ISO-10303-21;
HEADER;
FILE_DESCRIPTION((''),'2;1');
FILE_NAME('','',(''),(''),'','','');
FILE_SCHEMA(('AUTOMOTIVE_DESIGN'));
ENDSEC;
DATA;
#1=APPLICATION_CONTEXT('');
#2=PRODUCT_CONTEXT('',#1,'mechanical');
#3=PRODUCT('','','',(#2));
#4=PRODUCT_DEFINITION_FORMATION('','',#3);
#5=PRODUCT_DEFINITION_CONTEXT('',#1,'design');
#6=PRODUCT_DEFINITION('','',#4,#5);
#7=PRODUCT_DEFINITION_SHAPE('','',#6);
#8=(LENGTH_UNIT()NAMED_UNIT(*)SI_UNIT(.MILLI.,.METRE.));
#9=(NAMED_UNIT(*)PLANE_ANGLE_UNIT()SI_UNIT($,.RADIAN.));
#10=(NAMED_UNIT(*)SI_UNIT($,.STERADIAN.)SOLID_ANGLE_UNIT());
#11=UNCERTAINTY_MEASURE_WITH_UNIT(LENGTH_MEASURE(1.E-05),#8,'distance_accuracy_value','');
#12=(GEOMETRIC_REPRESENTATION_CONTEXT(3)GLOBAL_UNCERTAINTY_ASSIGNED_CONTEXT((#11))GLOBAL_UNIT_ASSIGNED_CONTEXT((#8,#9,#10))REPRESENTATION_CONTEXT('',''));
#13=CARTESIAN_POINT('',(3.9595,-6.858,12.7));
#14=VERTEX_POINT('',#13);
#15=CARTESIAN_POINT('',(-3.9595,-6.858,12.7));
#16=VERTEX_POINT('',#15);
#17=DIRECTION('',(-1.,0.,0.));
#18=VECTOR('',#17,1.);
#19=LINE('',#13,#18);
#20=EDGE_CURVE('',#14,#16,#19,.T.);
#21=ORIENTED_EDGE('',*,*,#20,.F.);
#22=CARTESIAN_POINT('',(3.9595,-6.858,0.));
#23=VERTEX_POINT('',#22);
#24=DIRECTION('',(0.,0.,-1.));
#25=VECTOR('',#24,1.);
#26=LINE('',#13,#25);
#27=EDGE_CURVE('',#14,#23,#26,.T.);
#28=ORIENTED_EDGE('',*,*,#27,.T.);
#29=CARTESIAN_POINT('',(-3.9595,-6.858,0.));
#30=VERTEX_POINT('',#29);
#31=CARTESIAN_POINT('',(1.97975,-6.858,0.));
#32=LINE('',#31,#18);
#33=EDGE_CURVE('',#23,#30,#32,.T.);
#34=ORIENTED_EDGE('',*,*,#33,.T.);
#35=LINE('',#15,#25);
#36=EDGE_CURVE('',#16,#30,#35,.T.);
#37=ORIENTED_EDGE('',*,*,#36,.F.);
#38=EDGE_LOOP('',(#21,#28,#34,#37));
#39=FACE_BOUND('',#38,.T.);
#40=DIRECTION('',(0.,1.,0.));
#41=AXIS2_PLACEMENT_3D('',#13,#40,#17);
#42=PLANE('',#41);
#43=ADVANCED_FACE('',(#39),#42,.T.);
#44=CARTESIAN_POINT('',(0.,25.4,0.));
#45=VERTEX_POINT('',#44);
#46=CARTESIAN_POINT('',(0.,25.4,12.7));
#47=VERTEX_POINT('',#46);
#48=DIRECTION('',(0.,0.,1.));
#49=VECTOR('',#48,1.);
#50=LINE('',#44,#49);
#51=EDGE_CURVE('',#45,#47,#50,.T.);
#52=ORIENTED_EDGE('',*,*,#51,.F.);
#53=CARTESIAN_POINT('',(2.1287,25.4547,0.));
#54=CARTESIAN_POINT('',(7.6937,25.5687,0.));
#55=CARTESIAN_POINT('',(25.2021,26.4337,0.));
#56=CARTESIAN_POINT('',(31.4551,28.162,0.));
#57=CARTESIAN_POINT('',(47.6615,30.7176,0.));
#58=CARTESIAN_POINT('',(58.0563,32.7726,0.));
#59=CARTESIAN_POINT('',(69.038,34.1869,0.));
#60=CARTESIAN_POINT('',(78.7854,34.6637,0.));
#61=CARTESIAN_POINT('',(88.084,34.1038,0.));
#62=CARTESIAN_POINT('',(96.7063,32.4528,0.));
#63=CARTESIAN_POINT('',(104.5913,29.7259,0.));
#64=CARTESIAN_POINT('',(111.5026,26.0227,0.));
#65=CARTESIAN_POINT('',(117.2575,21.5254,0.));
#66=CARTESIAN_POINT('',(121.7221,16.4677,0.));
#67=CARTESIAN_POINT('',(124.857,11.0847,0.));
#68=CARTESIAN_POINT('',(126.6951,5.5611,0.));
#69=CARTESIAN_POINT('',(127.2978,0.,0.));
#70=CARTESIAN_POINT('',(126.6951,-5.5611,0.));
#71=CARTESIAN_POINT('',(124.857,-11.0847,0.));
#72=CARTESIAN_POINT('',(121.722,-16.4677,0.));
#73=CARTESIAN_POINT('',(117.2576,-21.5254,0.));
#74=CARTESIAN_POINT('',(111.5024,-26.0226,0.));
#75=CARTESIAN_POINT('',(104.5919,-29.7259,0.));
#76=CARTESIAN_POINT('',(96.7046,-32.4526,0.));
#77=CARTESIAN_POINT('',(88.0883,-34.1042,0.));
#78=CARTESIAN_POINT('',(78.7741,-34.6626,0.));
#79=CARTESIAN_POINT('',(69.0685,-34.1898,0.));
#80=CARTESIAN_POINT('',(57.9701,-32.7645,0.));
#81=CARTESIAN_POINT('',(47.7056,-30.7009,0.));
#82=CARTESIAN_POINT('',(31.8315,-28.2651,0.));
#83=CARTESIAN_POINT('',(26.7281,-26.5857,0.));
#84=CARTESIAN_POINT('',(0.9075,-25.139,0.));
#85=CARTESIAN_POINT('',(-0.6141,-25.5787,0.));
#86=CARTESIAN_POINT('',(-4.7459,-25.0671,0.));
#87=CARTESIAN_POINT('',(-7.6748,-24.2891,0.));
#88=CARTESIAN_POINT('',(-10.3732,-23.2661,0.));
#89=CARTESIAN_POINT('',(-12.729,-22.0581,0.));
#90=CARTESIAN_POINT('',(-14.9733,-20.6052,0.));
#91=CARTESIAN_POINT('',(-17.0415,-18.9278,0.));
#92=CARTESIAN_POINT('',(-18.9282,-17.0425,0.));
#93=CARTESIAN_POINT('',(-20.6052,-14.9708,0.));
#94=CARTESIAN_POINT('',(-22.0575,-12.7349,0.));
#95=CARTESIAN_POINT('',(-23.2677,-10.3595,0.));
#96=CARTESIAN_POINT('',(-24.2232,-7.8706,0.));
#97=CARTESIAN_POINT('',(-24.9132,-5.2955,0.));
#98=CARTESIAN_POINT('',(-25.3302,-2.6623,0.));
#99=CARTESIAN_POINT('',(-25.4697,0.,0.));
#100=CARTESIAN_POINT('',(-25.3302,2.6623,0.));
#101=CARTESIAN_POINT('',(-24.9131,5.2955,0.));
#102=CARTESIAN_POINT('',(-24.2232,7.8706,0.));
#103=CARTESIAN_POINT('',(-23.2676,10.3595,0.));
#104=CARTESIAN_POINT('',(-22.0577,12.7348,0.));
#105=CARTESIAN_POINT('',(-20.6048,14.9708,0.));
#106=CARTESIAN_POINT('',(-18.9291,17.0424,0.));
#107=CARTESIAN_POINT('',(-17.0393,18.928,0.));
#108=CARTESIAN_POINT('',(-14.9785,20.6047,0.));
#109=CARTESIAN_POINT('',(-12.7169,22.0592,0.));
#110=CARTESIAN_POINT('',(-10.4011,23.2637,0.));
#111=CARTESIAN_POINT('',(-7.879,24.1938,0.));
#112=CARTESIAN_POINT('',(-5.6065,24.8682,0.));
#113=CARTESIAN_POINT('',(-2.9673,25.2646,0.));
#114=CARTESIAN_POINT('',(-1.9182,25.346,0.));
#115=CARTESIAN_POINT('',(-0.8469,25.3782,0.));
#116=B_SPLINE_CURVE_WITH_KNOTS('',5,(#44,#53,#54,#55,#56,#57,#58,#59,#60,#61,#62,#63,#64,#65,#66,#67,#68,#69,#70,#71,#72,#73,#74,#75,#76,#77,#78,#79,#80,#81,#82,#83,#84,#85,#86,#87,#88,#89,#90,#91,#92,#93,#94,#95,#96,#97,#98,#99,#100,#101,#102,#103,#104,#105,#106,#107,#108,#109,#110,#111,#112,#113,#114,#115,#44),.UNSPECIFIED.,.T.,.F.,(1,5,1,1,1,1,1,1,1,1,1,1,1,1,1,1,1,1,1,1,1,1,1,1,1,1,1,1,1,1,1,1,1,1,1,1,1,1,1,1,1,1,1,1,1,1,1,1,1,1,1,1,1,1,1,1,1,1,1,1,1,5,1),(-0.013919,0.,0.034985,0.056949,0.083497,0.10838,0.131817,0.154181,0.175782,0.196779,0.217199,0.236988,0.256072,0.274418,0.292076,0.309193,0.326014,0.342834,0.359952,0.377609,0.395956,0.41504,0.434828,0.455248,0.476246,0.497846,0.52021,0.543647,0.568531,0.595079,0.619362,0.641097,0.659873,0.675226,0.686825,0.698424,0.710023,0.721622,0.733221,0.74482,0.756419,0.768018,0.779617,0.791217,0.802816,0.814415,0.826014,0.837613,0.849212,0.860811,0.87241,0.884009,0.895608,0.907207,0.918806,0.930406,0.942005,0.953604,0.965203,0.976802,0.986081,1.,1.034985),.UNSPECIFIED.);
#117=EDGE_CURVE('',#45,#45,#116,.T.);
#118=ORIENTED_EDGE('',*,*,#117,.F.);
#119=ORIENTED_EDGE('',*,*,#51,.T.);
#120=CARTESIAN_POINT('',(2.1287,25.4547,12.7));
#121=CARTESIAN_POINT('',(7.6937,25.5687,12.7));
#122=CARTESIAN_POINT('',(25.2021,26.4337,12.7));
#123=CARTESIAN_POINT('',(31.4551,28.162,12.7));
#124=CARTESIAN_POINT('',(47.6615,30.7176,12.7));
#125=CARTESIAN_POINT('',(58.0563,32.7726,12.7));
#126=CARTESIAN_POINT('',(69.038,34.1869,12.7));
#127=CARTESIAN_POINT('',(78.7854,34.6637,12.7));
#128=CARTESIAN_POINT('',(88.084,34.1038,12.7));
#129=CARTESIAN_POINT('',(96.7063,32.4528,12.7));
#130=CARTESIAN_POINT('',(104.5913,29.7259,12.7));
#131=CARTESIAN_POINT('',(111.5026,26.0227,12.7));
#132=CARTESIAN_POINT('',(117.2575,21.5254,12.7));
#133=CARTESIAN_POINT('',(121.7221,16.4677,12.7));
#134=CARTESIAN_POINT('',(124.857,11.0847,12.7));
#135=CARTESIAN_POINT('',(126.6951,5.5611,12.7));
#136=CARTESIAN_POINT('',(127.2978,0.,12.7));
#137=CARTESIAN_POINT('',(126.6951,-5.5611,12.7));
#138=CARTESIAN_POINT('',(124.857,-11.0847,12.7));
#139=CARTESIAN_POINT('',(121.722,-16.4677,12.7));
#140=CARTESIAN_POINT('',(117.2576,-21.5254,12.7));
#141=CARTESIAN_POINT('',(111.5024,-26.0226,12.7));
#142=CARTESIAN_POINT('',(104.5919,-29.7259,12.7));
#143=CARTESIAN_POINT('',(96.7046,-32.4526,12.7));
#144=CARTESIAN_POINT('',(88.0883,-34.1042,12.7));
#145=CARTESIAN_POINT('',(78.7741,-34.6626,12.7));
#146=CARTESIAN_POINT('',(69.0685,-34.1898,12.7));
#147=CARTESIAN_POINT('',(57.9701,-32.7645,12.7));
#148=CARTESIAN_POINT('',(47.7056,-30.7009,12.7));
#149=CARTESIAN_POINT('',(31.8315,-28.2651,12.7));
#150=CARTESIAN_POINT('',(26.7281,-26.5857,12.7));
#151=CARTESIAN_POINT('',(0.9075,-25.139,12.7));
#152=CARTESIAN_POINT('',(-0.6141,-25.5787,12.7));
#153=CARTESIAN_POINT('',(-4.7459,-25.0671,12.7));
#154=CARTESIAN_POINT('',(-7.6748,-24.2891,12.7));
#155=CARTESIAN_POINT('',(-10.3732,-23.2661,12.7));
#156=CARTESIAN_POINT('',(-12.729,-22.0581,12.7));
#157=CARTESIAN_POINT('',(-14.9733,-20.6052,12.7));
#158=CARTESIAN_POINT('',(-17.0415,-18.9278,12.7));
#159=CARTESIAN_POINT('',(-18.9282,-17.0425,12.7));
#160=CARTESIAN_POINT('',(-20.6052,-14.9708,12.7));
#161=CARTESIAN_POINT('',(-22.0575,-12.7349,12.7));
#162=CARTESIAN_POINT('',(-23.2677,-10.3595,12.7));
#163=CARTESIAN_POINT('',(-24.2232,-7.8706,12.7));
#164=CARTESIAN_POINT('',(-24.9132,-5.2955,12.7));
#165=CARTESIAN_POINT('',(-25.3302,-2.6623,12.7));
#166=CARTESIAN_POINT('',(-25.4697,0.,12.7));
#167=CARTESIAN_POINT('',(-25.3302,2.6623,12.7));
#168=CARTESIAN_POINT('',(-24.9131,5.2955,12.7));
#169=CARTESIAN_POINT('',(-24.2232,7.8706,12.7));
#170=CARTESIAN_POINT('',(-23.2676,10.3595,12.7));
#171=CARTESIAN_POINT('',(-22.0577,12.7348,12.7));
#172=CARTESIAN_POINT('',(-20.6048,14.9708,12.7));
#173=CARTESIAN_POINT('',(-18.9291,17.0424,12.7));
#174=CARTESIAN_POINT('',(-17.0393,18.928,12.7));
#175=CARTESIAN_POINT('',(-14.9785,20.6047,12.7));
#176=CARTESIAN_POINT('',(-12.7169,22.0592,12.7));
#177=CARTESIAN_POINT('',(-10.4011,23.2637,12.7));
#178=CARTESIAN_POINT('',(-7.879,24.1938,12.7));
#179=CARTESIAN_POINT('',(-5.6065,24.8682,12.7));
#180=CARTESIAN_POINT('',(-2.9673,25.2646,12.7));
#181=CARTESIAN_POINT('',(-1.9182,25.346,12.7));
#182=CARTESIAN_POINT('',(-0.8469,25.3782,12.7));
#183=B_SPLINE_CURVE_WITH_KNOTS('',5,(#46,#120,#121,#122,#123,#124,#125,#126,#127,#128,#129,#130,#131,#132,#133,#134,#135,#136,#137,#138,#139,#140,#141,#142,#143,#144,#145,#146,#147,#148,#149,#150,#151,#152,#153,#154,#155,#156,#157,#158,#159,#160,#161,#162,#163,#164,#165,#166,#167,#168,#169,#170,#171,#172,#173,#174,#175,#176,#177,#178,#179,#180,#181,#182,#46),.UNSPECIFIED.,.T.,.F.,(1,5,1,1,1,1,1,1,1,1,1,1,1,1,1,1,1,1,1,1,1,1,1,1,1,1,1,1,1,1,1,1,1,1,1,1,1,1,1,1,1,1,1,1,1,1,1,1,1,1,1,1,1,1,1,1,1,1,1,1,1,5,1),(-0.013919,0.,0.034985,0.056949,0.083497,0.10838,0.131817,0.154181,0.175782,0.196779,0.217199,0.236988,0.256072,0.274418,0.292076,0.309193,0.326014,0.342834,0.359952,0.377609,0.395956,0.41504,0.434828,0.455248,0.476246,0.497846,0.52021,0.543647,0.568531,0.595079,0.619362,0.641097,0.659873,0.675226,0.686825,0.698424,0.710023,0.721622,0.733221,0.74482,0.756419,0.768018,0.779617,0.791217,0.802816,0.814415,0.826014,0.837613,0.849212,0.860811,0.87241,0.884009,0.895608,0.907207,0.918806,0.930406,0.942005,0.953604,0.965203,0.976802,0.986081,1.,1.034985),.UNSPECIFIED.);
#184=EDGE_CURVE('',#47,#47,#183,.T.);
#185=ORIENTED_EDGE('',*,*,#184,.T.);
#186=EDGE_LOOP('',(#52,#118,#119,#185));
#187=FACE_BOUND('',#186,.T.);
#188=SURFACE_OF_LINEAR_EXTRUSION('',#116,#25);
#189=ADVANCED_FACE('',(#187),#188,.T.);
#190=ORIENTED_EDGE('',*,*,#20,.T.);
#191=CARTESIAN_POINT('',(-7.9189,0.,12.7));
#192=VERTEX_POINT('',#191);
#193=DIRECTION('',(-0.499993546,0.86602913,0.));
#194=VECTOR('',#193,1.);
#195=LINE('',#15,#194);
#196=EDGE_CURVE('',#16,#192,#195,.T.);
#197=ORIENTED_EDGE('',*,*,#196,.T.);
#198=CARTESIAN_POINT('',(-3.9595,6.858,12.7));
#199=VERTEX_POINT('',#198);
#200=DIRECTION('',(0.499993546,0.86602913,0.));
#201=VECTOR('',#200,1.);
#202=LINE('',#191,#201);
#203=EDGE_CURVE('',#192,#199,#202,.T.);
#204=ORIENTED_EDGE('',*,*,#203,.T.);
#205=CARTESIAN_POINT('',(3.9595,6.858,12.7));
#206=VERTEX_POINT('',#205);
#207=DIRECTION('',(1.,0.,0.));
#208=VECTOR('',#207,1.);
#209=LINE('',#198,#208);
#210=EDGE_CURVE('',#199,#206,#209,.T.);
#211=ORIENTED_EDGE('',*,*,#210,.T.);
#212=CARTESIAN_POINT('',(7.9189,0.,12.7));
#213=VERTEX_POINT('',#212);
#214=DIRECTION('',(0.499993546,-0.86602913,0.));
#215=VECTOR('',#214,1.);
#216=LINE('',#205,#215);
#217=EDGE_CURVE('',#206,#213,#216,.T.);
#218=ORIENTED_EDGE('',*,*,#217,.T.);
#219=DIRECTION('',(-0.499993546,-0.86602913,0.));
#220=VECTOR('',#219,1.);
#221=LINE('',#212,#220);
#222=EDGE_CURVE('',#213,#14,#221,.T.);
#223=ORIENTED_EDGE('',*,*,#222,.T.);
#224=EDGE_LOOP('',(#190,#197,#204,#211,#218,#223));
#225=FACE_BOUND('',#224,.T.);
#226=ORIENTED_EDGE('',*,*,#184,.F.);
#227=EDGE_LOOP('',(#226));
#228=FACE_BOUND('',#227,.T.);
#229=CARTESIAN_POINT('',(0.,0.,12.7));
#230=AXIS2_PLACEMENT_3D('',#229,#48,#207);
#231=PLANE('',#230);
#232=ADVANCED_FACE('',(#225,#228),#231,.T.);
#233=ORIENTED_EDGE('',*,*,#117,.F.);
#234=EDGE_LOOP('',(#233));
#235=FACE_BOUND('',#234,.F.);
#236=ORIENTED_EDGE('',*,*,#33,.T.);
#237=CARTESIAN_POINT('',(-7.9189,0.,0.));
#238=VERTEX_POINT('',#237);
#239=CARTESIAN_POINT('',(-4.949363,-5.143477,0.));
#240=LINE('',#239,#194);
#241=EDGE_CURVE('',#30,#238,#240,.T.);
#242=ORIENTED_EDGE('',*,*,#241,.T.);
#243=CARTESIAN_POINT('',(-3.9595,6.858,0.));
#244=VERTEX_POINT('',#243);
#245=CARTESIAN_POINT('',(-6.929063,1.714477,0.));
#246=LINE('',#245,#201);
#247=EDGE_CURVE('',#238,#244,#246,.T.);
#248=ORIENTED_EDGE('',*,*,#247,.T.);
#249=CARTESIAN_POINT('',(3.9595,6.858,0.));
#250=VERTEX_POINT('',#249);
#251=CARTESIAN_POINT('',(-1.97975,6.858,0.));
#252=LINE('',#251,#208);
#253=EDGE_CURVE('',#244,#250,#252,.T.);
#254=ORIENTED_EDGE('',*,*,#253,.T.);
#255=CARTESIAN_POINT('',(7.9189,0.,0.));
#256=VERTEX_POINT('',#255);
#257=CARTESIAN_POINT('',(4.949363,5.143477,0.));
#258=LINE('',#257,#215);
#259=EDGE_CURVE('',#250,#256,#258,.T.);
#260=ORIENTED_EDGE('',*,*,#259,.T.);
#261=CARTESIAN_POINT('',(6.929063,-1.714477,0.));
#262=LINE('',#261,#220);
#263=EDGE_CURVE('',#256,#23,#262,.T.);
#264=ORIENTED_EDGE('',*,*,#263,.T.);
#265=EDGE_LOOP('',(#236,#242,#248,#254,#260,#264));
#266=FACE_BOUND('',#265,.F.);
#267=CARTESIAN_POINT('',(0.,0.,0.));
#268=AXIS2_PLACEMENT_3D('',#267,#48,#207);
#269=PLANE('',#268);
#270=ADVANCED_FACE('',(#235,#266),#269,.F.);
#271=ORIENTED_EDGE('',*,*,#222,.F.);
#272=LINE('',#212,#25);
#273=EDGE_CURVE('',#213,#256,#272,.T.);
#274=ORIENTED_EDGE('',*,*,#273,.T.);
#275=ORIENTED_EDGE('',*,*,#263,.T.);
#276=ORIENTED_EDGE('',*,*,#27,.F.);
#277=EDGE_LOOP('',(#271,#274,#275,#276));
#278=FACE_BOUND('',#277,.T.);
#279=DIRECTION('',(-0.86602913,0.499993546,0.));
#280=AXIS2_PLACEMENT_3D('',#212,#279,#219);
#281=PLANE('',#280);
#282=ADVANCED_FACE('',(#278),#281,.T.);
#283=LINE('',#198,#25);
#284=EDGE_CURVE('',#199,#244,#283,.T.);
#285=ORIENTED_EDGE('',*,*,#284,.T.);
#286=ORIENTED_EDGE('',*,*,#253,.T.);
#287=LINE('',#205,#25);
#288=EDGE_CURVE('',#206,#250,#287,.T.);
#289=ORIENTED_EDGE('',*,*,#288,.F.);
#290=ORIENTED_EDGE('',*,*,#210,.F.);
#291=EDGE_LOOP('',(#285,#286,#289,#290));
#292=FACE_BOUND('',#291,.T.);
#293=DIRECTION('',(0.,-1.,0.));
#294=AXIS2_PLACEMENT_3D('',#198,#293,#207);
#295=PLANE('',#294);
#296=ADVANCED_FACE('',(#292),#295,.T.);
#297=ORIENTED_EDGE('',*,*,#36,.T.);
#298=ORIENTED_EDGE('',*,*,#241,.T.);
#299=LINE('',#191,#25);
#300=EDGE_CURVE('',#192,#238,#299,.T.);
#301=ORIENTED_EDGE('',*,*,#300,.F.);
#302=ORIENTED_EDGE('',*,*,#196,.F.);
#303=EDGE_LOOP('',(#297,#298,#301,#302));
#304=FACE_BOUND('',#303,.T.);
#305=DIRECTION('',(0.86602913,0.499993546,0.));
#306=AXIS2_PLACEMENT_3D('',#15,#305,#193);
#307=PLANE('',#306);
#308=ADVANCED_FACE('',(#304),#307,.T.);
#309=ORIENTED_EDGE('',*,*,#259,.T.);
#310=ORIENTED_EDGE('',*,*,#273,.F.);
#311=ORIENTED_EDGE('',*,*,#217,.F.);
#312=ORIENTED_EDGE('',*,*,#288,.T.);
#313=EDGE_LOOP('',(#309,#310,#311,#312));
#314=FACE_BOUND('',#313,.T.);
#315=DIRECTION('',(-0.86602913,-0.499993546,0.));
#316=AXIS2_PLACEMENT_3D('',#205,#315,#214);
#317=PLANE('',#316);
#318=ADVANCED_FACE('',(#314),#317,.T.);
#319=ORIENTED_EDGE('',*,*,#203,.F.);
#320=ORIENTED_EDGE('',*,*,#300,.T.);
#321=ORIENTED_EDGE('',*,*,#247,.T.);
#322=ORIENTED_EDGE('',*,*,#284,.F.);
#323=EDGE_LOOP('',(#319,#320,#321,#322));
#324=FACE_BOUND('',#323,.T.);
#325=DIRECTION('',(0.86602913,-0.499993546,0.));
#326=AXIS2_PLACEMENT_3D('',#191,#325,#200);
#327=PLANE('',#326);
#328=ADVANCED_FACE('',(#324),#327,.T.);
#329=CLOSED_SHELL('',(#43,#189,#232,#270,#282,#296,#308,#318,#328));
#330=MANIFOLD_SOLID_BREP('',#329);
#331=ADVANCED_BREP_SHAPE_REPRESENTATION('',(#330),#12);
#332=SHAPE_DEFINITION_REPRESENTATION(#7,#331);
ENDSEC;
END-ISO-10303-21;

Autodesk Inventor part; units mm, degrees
ref_plane "YZ Plane" through (0, 0, 0) normal (1, 0, 0) x (0, 1, 0)
ref_plane "XZ Plane" through (0, 0, 0) normal (0, 1, 0) x (-1, 0, 0)
sketch "Main Sketch" plane through (0, 0, 0) normal (0, 0, 1) x (1, 0, 0)
  spline S0 degree 5 poles (0, 25.4) (2.1287, 25.4547) (7.6937, 25.5687) (25.2021, 26.4337) (31.4551, 28.162) (47.6615, 30.7176) (58.0563, 32.7726) (69.038, 34.1869) (78.7854, 34.6637) (88.084, 34.1038) (96.7063, 32.4528) (104.5913, 29.7259) (111.5026, 26.0227) (117.2575, 21.5254) (121.7221, 16.4677) (124.857, 11.0847) (126.6951, 5.5611) (127.2978, 0) (126.6951, -5.5611) (124.857, -11.0847) (121.722, -16.4677) (117.2576, -21.5254) (111.5024, -26.0226) (104.5919, -29.7259) (96.7046, -32.4526) (88.0883, -34.1042) (78.7741, -34.6626) (69.0685, -34.1898) (57.9701, -32.7645) (47.7056, -30.7009) (31.8315, -28.2651) (26.7281, -26.5857) (0.9075, -25.139) (-0.6141, -25.5787) (-4.7459, -25.0671) (-7.6748, -24.2891) (-10.3732, -23.2661) (-12.729, -22.0581) (-14.9733, -20.6052) (-17.0415, -18.9278) (-18.9282, -17.0425) (-20.6052, -14.9708) (-22.0575, -12.7349) (-23.2677, -10.3595) (-24.2232, -7.8706) (-24.9132, -5.2955) (-25.3302, -2.6623) (-25.4697, 0) (-25.3302, 2.6623) (-24.9131, 5.2955) (-24.2232, 7.8706) (-23.2676, 10.3595) (-22.0577, 12.7348) (-20.6048, 14.9708) (-18.9291, 17.0424) (-17.0393, 18.928) (-14.9785, 20.6047) (-12.7169, 22.0592) (-10.4011, 23.2637) (-7.879, 24.1938) (-5.6065, 24.8682) (-2.9673, 25.2646) (-1.9182, 25.346) (-0.8469, 25.3782) (0, 25.4) knots 0 0 0 0 0 0 0.034985 0.056949 0.083497 0.10838 0.131817 0.154181 0.175782 0.196779 0.217199 0.236988 0.256072 0.274418 0.292076 0.309193 0.326014 0.342834 0.359952 0.377609 0.395956 0.41504 0.434828 0.455248 0.476246 0.497846 0.52021 0.543647 0.568531 0.595079 0.619362 0.641097 0.659873 0.675226 0.686825 0.698424 0.710023 0.721622 0.733221 0.74482 0.756419 0.768018 0.779617 0.791217 0.802816 0.814415 0.826014 0.837613 0.849212 0.860811 0.87241 0.884009 0.895608 0.907207 0.918806 0.930406 0.942005 0.953604 0.965203 0.976802 0.986081 1 1 1 1 1 1
  point P0 (34.3511, 28.4773)
  point P1 (47.9087, 30.8624)
  point P2 (59.4553, 32.8129)
  point P3 (69.7636, 34.0431)
  point P4 (79.3599, 34.4006)
  point P5 (88.4593, 33.7633)
  point P6 (97.0267, 32.0479)
  point P7 (104.869, 29.2522)
  point P8 (111.7328, 25.4833)
  point P9 (117.3941, 20.9508)
  point P10 (121.7242, 15.9225)
  point P11 (124.7128, 10.6545)
  point P12 (126.4389, 5.3238)
  point P13 (127, 0)
  point P14 (126.4389, -5.3238)
  point P15 (124.7128, -10.6545)
  point P16 (121.7242, -15.9225)
  point P17 (117.3941, -20.9508)
  point P18 (111.7328, -25.4833)
  point P19 (104.869, -29.2522)
  point P20 (97.0267, -32.0479)
  point P21 (88.4593, -33.7633)
  point P22 (79.3599, -34.4006)
  point P23 (69.7636, -34.0431)
  point P24 (59.4553, -32.8129)
  point P25 (47.9087, -30.8624)
  point P26 (34.3511, -28.4773)
  point P27 (18.2006, -26.3139)
  point P28 (0, -25.4)
  point P29 (-2.655, -25.2609)
  point P30 (-5.281, -24.8449)
  point P31 (-7.849, -24.1568)
  point P32 (-10.3311, -23.2041)
  point P33 (-12.7, -21.997)
  point P34 (-14.9297, -20.549)
  point P35 (-16.9959, -18.8759)
  point P36 (-18.8759, -16.9959)
  point P37 (-20.549, -14.9297)
  point P38 (-21.997, -12.7)
  point P39 (-23.2041, -10.3311)
  point P40 (-24.1568, -7.849)
  point P41 (-24.8449, -5.281)
  point P42 (-25.2609, -2.655)
  point P43 (-25.4, 0)
  point P44 (-25.2609, 2.655)
  point P45 (-24.8449, 5.281)
  point P46 (-24.1568, 7.849)
  point P47 (-23.2041, 10.3311)
  point P48 (-21.997, 12.7)
  point P49 (-20.549, 14.9297)
  point P50 (-18.8759, 16.9959)
  point P51 (-16.9959, 18.8759)
  point P52 (-14.9297, 20.549)
  point P53 (-12.7, 21.997)
  point P54 (-10.3311, 23.2041)
  point P55 (-7.849, 24.1568)
  point P56 (-5.281, 24.8449)
  point P57 (-2.655, 25.2609)
extrude "Cam" add sketch "Main Sketch" along normal blind 12.7
sketch "Sketch2" plane through (0, 0, 12.7) normal (0, 0, 1) x (1, 0, 0)
  line L0 (7.9189, 0) -> (3.9595, -6.858)
  line L1 (3.9595, -6.858) -> (-3.9595, -6.858)
  line L2 (-3.9595, -6.858) -> (-7.9189, 0)
  line L3 (-7.9189, 0) -> (-3.9595, 6.858)
  line L4 (-3.9595, 6.858) -> (3.9595, 6.858)
  line L5 (3.9595, 6.858) -> (7.9189, 0)
  point P0 (0, 0)
  point P1 (0, 0)
  dimension "d4" = 13.716
extrude "Extrusion2" cut sketch "Sketch2" against normal through all
ref_plane "Work Plane1" through (0, 0, 6.35) normal (0, 0, 1) x (1, 0, 0)
sketch "Sketch3" plane through (0, 0, 0) normal (0, 0, -1) x (-1, 0, 0)
  point P0 (0, 0)
properties part number "Disc Cam3-temp" material "Stainless Steel, Austenitic"
